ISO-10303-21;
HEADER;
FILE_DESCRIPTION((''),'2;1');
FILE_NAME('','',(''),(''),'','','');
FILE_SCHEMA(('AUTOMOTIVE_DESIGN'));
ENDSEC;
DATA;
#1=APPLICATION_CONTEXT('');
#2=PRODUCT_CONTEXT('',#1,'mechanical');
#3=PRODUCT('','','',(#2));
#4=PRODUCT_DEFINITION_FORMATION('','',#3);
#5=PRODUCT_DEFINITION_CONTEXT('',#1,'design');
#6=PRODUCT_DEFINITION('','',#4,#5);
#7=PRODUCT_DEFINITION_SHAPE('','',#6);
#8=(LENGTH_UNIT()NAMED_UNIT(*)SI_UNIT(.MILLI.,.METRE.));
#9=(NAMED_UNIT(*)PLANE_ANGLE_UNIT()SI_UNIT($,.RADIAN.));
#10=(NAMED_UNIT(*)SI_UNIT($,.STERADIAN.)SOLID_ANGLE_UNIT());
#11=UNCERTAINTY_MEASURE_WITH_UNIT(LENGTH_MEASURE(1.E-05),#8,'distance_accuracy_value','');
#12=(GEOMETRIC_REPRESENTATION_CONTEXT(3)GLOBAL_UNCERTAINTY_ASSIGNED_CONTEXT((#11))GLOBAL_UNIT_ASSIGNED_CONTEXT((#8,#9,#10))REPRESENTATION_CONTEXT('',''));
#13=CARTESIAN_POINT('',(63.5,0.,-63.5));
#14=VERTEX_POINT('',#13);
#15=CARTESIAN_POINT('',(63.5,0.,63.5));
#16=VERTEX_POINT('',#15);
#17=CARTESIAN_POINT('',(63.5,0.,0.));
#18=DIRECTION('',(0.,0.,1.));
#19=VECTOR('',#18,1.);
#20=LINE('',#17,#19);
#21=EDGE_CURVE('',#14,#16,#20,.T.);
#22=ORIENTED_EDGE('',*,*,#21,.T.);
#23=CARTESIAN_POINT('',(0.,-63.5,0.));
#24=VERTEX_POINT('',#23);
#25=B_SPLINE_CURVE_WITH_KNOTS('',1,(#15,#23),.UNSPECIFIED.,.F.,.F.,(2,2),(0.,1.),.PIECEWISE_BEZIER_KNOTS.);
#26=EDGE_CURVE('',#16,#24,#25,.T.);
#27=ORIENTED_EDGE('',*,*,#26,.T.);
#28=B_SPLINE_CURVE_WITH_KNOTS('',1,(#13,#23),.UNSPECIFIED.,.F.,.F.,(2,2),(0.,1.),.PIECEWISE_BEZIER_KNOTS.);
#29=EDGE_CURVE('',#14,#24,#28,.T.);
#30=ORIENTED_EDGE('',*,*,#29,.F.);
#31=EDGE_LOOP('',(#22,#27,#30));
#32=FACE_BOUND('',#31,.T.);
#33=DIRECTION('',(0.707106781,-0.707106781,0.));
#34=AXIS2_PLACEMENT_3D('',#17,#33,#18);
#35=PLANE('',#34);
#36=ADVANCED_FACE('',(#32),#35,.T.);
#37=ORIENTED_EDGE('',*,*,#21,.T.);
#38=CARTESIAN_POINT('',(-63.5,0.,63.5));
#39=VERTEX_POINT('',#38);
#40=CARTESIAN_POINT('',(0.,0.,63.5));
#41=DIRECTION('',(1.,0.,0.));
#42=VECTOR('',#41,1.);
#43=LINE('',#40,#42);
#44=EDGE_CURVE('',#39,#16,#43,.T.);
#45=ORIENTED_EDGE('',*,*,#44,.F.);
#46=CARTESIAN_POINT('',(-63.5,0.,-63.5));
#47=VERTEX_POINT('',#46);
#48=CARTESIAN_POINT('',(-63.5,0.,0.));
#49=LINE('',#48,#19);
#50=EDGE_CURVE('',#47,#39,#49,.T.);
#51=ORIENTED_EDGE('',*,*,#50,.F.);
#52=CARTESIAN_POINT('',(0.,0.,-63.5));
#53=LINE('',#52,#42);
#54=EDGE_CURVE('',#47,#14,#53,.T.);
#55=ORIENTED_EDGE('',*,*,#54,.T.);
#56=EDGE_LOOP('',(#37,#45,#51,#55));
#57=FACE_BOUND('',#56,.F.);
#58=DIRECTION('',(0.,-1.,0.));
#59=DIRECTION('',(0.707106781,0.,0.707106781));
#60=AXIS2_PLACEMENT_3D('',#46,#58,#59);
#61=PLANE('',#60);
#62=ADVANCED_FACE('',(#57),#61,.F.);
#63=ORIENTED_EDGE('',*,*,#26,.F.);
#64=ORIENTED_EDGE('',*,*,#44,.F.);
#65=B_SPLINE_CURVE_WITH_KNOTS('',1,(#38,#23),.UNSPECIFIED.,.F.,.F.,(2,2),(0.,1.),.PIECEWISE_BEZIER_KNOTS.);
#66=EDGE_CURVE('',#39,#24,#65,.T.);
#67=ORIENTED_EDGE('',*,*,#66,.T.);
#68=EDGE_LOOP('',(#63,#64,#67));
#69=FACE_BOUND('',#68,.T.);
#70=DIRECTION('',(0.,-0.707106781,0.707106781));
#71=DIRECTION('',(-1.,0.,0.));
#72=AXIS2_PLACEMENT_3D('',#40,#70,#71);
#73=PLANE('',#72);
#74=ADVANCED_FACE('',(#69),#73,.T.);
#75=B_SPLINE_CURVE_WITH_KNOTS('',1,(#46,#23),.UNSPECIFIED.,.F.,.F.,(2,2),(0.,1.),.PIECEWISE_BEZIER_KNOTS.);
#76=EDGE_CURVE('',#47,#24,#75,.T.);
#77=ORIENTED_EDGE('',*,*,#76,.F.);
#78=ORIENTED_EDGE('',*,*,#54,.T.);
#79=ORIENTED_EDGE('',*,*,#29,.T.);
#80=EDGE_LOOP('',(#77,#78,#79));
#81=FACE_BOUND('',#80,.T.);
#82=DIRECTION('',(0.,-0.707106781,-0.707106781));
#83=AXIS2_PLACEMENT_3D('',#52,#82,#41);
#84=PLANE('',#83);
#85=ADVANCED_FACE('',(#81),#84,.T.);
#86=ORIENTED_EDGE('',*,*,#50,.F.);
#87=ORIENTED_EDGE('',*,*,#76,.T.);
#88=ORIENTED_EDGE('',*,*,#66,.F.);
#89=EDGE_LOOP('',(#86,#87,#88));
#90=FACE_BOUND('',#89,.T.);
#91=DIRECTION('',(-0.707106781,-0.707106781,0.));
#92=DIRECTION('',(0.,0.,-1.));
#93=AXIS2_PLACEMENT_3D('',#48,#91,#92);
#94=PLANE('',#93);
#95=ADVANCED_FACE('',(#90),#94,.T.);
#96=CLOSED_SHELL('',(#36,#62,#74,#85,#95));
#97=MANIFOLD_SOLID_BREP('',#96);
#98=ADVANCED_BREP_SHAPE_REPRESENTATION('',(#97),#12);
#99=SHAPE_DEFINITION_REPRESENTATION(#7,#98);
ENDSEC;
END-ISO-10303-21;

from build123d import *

# Parameters (mm, degrees)
F0_W = 127
F0_H = 127


# Not quite as in the source:
# - an extrude whose draft closes it to a point is written as a loft to that point


with BuildPart() as f1:
    # F0 (on Front) → F1 section 0
    with BuildSketch(Plane.XZ, mode=Mode.PRIVATE) as f1_s0:
        Rectangle(F0_W, F0_H)
    loft([f1_s0.sketch, Vertex(0, -63.5, 0)], ruled=True)


solid = f1.part
